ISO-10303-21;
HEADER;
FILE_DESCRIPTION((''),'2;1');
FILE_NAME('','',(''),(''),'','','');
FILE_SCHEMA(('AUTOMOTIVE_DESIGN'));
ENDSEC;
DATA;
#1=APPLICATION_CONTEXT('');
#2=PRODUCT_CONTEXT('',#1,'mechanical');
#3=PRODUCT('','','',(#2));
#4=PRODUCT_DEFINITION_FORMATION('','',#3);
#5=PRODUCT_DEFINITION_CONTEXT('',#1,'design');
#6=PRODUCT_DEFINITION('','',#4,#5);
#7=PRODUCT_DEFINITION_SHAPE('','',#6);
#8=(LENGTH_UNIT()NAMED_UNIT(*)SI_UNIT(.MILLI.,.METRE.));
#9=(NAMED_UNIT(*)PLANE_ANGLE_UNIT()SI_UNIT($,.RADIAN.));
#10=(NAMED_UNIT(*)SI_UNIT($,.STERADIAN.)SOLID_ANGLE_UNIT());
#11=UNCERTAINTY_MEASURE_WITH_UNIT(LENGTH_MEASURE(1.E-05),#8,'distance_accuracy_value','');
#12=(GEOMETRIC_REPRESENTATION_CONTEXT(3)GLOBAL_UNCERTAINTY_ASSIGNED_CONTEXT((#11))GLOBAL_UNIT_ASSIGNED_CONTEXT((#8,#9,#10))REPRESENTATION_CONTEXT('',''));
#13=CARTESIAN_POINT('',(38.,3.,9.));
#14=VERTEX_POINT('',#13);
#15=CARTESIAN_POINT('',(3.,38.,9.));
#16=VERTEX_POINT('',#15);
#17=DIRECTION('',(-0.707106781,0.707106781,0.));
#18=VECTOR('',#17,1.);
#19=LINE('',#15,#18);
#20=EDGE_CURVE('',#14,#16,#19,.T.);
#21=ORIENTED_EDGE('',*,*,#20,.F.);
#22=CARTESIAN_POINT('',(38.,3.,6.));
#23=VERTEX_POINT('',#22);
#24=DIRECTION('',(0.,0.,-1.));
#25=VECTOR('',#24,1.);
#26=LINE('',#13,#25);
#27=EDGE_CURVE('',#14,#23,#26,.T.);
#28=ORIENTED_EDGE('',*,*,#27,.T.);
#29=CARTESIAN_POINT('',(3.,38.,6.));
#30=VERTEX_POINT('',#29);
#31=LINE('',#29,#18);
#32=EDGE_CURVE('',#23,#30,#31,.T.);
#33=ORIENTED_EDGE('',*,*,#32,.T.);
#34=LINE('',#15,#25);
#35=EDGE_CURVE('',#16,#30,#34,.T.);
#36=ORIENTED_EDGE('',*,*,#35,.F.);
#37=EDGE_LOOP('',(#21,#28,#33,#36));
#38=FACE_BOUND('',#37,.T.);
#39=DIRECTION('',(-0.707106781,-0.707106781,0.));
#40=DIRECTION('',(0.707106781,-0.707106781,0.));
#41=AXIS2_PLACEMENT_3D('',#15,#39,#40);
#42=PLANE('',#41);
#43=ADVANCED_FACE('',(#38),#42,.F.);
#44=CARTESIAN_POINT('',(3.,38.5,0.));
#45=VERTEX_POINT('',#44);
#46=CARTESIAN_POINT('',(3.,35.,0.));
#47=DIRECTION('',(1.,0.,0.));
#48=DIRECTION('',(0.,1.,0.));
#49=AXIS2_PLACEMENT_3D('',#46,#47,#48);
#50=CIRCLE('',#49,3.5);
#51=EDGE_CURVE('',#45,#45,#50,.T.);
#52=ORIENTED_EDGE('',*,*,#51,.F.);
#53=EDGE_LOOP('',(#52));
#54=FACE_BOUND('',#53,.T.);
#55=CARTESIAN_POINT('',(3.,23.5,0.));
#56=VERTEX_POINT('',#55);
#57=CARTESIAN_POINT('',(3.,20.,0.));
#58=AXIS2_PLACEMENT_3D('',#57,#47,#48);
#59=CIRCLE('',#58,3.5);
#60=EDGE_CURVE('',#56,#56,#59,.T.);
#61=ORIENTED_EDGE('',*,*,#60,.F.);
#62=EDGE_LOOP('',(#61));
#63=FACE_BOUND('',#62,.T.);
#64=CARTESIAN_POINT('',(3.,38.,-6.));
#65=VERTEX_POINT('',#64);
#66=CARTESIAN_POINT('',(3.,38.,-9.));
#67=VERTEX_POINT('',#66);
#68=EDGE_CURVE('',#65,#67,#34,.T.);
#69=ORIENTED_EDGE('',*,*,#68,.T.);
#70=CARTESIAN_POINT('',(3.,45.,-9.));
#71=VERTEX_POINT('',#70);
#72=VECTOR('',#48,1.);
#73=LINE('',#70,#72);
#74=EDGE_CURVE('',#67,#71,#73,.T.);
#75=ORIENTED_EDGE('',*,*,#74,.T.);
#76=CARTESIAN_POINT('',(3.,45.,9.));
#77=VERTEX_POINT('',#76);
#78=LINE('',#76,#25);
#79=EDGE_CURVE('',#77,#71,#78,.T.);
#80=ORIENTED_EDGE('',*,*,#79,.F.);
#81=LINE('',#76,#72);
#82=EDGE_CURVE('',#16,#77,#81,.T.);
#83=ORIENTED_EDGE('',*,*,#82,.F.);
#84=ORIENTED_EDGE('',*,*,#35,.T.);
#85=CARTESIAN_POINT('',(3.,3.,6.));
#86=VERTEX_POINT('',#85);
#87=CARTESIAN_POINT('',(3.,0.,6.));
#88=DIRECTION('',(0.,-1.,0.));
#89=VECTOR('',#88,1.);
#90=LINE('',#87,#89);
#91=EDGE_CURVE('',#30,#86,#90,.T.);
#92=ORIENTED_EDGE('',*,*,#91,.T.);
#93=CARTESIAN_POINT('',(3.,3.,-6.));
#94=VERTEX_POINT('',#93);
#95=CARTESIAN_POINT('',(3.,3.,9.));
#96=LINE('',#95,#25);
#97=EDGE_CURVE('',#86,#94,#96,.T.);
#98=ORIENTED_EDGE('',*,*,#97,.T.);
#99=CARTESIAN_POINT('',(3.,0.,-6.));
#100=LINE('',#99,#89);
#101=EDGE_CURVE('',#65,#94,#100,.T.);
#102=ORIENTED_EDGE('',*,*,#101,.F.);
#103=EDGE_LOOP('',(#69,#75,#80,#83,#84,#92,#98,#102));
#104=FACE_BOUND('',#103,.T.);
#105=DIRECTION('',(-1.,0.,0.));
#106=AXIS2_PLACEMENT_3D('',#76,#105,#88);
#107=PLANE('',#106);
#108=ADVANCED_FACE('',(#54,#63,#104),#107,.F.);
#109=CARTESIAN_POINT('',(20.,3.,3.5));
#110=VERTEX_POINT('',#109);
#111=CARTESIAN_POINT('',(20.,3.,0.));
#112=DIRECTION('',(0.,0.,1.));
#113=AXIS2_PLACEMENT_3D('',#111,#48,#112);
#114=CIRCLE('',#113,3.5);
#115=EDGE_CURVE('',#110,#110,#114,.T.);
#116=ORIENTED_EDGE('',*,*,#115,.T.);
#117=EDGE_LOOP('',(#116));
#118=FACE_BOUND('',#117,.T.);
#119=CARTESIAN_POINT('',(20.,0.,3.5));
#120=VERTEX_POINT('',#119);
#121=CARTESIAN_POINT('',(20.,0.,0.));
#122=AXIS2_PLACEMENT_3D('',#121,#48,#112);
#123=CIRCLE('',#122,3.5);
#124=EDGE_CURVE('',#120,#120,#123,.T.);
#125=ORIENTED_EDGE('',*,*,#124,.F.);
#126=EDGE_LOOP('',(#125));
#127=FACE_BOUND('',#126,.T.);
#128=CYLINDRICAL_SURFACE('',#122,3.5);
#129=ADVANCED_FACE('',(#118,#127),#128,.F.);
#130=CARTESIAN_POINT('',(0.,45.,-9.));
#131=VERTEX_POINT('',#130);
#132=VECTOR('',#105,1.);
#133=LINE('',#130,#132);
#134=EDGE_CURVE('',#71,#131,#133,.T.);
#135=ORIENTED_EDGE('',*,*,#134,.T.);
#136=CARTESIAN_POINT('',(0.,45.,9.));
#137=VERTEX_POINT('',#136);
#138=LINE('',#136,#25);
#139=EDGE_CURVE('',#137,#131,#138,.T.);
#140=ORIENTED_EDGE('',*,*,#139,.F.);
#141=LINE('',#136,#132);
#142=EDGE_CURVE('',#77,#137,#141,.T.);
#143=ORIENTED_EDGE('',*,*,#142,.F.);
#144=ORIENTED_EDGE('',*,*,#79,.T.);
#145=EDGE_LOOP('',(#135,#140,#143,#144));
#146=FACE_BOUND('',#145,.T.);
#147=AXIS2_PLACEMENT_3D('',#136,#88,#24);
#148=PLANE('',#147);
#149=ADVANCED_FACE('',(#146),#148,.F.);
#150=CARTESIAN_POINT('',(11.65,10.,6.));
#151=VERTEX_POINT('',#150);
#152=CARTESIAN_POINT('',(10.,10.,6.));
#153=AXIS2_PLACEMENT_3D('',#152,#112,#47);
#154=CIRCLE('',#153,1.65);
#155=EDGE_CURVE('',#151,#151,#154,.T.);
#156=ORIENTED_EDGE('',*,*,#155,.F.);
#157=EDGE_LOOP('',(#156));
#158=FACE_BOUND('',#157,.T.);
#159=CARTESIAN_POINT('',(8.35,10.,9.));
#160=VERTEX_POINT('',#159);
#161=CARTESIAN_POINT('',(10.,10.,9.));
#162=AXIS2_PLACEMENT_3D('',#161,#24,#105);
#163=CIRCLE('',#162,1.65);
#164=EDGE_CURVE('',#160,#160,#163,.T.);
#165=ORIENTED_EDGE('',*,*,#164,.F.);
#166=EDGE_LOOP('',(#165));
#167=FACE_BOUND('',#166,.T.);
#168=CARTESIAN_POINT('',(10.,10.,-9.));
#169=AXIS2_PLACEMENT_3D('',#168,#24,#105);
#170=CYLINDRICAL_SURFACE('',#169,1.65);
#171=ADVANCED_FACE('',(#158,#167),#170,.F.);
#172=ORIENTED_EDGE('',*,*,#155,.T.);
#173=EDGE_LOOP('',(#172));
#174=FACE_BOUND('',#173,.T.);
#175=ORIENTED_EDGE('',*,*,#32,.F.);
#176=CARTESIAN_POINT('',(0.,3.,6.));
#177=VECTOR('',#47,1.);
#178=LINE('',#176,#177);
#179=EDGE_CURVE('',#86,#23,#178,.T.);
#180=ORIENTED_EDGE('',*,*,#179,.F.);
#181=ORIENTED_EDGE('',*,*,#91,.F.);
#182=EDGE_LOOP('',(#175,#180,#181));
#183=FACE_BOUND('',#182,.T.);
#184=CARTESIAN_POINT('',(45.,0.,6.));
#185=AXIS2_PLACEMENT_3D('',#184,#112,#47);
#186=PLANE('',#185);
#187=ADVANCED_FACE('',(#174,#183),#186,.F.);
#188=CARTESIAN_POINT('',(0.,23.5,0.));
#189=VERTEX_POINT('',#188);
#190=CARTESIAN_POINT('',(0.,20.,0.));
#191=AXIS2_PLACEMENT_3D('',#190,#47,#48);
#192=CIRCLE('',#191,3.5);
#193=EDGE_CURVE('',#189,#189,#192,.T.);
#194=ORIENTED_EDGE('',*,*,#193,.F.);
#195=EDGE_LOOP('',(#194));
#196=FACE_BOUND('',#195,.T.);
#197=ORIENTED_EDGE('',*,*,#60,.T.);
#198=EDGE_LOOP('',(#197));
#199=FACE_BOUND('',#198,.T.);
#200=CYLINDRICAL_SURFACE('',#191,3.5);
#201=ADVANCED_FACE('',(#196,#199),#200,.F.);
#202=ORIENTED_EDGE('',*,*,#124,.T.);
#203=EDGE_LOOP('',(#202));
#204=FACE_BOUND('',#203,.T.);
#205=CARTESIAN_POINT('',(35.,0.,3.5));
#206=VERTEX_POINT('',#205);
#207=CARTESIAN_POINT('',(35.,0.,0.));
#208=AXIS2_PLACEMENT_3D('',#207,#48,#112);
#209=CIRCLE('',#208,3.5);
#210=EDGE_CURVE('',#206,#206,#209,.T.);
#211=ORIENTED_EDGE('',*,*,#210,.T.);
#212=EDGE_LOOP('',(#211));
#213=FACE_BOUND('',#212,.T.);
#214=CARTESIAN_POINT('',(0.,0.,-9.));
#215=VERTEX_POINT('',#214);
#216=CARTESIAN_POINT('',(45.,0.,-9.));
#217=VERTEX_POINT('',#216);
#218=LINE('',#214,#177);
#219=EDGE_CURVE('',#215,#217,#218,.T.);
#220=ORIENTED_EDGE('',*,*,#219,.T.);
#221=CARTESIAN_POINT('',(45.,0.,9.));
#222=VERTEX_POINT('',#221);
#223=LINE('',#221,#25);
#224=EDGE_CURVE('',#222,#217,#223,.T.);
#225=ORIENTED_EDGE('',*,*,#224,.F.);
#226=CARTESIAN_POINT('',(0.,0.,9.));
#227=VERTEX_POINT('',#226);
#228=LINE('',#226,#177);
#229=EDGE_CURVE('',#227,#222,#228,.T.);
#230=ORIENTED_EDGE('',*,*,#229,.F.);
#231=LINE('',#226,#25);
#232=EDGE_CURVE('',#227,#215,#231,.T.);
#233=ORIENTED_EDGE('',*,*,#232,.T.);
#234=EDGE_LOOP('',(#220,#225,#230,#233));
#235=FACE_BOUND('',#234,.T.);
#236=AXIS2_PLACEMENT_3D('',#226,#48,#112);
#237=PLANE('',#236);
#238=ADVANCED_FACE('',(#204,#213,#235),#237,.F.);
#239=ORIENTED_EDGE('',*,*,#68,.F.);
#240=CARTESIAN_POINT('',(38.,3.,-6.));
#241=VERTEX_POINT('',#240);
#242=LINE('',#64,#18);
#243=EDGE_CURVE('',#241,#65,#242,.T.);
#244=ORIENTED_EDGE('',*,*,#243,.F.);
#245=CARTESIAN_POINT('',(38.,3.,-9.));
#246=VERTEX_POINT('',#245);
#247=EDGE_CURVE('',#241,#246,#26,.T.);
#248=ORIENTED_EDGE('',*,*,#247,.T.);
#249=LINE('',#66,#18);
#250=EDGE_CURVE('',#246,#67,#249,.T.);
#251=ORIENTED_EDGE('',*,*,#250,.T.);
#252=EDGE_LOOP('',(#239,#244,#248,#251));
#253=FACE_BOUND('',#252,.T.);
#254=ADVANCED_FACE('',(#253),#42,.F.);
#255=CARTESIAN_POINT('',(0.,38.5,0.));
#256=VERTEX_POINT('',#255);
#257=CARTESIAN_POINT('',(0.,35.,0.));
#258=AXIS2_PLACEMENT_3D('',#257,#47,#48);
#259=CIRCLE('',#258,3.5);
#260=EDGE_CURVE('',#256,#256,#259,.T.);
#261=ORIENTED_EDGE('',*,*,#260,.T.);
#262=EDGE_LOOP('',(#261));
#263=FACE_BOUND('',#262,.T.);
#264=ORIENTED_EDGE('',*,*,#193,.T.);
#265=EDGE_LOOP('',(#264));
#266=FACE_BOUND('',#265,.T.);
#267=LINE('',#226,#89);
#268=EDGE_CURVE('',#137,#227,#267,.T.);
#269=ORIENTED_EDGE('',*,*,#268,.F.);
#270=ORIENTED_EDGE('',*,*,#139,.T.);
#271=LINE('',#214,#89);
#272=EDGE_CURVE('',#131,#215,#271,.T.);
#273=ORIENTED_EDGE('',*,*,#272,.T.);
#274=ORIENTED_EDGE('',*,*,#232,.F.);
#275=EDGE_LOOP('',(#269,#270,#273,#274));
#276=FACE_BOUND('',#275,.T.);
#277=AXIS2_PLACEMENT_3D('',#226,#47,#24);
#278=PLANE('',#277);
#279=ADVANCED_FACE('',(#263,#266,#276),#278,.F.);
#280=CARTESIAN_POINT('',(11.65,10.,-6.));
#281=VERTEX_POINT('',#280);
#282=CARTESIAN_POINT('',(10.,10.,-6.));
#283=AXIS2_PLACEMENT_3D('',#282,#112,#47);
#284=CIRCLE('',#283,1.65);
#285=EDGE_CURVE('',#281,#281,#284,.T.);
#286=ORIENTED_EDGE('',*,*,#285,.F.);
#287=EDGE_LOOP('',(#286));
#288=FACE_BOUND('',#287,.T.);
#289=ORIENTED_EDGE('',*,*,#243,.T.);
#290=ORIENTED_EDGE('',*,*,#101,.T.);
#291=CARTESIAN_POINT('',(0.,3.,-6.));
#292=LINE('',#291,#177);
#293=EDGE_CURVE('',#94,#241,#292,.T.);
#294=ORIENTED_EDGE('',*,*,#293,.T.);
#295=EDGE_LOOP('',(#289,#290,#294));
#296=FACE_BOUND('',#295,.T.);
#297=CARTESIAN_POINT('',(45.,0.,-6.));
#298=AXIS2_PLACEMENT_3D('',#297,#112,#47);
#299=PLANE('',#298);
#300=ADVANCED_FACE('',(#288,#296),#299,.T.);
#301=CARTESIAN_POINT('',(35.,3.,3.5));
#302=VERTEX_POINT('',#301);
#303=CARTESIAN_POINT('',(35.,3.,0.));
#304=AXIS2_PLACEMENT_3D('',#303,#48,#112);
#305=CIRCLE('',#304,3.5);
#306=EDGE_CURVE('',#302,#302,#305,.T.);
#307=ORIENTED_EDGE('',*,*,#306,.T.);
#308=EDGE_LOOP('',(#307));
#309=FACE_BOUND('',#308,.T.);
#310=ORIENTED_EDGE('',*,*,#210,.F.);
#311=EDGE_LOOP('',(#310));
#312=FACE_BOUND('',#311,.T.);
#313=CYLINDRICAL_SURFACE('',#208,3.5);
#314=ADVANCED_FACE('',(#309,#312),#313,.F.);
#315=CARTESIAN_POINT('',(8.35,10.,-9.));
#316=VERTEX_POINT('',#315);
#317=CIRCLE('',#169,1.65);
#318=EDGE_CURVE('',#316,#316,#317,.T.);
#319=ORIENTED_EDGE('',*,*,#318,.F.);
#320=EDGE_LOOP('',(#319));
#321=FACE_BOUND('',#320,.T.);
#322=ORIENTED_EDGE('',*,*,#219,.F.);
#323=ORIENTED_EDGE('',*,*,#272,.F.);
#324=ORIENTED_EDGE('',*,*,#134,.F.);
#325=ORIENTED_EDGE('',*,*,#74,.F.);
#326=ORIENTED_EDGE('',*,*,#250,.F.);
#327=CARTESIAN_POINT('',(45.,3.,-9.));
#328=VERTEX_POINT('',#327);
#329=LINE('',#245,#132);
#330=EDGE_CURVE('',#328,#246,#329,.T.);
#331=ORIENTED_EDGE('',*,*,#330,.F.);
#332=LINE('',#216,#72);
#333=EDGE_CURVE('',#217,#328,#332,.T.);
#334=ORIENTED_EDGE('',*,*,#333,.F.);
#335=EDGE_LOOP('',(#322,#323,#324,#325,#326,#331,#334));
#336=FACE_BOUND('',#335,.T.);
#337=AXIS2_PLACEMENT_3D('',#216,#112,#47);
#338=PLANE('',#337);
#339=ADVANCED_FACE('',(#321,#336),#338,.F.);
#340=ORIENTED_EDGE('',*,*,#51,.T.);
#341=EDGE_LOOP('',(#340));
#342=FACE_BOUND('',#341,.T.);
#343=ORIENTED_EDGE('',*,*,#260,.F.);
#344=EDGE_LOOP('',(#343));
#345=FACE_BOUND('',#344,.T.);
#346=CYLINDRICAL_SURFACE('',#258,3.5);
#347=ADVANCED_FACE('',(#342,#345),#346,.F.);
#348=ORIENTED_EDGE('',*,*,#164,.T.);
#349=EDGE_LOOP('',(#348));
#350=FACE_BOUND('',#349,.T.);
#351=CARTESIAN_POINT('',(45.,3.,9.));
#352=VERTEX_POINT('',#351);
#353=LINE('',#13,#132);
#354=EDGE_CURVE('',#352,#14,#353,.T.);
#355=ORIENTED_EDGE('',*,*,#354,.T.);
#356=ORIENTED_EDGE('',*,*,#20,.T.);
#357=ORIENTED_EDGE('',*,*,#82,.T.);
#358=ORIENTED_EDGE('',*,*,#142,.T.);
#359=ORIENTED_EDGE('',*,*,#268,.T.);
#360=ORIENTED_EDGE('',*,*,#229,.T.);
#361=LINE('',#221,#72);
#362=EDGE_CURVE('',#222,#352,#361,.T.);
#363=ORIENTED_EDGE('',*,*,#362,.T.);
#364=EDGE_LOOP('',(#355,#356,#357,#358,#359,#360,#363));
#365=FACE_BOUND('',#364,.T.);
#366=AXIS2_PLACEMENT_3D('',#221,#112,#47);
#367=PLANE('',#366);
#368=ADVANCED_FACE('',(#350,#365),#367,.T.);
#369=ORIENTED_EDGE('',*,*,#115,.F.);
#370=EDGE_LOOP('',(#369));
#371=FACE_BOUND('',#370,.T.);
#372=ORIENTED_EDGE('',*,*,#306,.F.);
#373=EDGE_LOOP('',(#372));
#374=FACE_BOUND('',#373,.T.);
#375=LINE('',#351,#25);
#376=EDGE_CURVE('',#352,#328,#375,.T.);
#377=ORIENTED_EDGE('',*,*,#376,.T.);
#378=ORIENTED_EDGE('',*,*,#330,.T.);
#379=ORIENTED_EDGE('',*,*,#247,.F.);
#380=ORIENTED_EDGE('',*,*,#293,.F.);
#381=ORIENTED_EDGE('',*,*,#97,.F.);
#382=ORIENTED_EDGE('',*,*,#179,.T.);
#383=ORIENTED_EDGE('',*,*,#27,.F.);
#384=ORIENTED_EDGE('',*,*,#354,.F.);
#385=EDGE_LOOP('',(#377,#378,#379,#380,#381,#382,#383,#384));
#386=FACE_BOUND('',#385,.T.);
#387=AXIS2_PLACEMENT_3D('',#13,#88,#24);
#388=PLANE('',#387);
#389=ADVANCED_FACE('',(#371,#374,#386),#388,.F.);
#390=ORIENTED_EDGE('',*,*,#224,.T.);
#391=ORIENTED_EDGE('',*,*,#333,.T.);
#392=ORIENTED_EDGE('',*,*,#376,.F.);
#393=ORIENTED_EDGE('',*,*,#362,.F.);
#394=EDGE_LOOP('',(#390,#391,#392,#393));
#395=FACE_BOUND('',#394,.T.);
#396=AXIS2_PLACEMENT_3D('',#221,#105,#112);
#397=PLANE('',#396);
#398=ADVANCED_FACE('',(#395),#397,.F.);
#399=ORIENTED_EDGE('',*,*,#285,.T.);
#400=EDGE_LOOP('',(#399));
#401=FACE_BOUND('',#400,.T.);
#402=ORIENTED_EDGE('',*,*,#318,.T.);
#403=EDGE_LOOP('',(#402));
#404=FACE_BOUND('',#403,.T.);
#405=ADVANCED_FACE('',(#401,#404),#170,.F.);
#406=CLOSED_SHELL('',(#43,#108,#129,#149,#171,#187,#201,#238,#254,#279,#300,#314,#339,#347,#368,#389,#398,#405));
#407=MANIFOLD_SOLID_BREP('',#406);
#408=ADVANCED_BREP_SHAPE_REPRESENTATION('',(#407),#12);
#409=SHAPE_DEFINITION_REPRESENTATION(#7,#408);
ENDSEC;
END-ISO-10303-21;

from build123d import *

# Parameters (mm, degrees)
EXTRUDE_1_DEPTH     = 9
SHELL_START         = 3
SHELL_1_OUTLINE_W   = 37
SHELL_1_OUTLINE_H   = 12
SHELL_1_DEPTH       = 35
SKETCH_5_R          = 3.5
CUT_EXTRUDE_1_DEPTH = 63.20932406
SKETCH_6_R          = 3.5
CUT_EXTRUDE_2_DEPTH = 63.20932406
HOLE_WIZARD_M4_1_D  = 3.3


# Read off the part's stored shape, not the designer's step: 抽壳1
with BuildPart() as part:
    # 草图1 → 凸台-拉伸1 (new, symmetric)
    with BuildSketch(Plane.XY):
        Polygon((0, 0), (0, 45), (3, 45), (3, 38), (38, 3), (45, 3), (45, 0), align=None)
    extrude(amount=EXTRUDE_1_DEPTH, both=True)

    # 抽壳1 outline → 抽壳1 (cut)
    with BuildSketch(Plane(origin=(0, 0, 0), x_dir=(1, 0, 0), z_dir=(0, 1, 0)).offset(SHELL_START)):
        with Locations((21.5, 0)):
            Rectangle(SHELL_1_OUTLINE_W, SHELL_1_OUTLINE_H)
    extrude(amount=SHELL_1_DEPTH, mode=Mode.SUBTRACT)

    # 草图5 → 切除-拉伸1 (cut, through all)
    with BuildSketch(Plane(origin=(0, 3, 0), x_dir=(1, 0, 0), z_dir=(0, 1, 0))):
        with Locations(Location((20, 0, 0), (0, 0, 270))):
            Circle(SKETCH_5_R)
        with Locations(Location((35, 0, 0), (0, 0, 270))):
            Circle(SKETCH_5_R)
    extrude(amount=-CUT_EXTRUDE_1_DEPTH, mode=Mode.SUBTRACT)

    # 草图6 → 切除-拉伸2 (cut, through all)
    with BuildSketch(Plane(origin=(3, 0, 0), x_dir=(0, 0, -1), z_dir=(1, 0, 0))):
        with Locations(Location((0, 20, 0), (0, 0, 90))):
            Circle(SKETCH_6_R)
        with Locations(Location((0, 35, 0), (0, 0, 90))):
            Circle(SKETCH_6_R)
    extrude(amount=-CUT_EXTRUDE_2_DEPTH, mode=Mode.SUBTRACT)

    # M4 螺纹孔1 (through all)
    with Locations(Plane(origin=(0, 0, -9), x_dir=(-1, 0, 0), z_dir=(0, 0, -1))):
        with Locations((-10, 10)):
            Hole(HOLE_WIZARD_M4_1_D / 2)


solid = part.part
